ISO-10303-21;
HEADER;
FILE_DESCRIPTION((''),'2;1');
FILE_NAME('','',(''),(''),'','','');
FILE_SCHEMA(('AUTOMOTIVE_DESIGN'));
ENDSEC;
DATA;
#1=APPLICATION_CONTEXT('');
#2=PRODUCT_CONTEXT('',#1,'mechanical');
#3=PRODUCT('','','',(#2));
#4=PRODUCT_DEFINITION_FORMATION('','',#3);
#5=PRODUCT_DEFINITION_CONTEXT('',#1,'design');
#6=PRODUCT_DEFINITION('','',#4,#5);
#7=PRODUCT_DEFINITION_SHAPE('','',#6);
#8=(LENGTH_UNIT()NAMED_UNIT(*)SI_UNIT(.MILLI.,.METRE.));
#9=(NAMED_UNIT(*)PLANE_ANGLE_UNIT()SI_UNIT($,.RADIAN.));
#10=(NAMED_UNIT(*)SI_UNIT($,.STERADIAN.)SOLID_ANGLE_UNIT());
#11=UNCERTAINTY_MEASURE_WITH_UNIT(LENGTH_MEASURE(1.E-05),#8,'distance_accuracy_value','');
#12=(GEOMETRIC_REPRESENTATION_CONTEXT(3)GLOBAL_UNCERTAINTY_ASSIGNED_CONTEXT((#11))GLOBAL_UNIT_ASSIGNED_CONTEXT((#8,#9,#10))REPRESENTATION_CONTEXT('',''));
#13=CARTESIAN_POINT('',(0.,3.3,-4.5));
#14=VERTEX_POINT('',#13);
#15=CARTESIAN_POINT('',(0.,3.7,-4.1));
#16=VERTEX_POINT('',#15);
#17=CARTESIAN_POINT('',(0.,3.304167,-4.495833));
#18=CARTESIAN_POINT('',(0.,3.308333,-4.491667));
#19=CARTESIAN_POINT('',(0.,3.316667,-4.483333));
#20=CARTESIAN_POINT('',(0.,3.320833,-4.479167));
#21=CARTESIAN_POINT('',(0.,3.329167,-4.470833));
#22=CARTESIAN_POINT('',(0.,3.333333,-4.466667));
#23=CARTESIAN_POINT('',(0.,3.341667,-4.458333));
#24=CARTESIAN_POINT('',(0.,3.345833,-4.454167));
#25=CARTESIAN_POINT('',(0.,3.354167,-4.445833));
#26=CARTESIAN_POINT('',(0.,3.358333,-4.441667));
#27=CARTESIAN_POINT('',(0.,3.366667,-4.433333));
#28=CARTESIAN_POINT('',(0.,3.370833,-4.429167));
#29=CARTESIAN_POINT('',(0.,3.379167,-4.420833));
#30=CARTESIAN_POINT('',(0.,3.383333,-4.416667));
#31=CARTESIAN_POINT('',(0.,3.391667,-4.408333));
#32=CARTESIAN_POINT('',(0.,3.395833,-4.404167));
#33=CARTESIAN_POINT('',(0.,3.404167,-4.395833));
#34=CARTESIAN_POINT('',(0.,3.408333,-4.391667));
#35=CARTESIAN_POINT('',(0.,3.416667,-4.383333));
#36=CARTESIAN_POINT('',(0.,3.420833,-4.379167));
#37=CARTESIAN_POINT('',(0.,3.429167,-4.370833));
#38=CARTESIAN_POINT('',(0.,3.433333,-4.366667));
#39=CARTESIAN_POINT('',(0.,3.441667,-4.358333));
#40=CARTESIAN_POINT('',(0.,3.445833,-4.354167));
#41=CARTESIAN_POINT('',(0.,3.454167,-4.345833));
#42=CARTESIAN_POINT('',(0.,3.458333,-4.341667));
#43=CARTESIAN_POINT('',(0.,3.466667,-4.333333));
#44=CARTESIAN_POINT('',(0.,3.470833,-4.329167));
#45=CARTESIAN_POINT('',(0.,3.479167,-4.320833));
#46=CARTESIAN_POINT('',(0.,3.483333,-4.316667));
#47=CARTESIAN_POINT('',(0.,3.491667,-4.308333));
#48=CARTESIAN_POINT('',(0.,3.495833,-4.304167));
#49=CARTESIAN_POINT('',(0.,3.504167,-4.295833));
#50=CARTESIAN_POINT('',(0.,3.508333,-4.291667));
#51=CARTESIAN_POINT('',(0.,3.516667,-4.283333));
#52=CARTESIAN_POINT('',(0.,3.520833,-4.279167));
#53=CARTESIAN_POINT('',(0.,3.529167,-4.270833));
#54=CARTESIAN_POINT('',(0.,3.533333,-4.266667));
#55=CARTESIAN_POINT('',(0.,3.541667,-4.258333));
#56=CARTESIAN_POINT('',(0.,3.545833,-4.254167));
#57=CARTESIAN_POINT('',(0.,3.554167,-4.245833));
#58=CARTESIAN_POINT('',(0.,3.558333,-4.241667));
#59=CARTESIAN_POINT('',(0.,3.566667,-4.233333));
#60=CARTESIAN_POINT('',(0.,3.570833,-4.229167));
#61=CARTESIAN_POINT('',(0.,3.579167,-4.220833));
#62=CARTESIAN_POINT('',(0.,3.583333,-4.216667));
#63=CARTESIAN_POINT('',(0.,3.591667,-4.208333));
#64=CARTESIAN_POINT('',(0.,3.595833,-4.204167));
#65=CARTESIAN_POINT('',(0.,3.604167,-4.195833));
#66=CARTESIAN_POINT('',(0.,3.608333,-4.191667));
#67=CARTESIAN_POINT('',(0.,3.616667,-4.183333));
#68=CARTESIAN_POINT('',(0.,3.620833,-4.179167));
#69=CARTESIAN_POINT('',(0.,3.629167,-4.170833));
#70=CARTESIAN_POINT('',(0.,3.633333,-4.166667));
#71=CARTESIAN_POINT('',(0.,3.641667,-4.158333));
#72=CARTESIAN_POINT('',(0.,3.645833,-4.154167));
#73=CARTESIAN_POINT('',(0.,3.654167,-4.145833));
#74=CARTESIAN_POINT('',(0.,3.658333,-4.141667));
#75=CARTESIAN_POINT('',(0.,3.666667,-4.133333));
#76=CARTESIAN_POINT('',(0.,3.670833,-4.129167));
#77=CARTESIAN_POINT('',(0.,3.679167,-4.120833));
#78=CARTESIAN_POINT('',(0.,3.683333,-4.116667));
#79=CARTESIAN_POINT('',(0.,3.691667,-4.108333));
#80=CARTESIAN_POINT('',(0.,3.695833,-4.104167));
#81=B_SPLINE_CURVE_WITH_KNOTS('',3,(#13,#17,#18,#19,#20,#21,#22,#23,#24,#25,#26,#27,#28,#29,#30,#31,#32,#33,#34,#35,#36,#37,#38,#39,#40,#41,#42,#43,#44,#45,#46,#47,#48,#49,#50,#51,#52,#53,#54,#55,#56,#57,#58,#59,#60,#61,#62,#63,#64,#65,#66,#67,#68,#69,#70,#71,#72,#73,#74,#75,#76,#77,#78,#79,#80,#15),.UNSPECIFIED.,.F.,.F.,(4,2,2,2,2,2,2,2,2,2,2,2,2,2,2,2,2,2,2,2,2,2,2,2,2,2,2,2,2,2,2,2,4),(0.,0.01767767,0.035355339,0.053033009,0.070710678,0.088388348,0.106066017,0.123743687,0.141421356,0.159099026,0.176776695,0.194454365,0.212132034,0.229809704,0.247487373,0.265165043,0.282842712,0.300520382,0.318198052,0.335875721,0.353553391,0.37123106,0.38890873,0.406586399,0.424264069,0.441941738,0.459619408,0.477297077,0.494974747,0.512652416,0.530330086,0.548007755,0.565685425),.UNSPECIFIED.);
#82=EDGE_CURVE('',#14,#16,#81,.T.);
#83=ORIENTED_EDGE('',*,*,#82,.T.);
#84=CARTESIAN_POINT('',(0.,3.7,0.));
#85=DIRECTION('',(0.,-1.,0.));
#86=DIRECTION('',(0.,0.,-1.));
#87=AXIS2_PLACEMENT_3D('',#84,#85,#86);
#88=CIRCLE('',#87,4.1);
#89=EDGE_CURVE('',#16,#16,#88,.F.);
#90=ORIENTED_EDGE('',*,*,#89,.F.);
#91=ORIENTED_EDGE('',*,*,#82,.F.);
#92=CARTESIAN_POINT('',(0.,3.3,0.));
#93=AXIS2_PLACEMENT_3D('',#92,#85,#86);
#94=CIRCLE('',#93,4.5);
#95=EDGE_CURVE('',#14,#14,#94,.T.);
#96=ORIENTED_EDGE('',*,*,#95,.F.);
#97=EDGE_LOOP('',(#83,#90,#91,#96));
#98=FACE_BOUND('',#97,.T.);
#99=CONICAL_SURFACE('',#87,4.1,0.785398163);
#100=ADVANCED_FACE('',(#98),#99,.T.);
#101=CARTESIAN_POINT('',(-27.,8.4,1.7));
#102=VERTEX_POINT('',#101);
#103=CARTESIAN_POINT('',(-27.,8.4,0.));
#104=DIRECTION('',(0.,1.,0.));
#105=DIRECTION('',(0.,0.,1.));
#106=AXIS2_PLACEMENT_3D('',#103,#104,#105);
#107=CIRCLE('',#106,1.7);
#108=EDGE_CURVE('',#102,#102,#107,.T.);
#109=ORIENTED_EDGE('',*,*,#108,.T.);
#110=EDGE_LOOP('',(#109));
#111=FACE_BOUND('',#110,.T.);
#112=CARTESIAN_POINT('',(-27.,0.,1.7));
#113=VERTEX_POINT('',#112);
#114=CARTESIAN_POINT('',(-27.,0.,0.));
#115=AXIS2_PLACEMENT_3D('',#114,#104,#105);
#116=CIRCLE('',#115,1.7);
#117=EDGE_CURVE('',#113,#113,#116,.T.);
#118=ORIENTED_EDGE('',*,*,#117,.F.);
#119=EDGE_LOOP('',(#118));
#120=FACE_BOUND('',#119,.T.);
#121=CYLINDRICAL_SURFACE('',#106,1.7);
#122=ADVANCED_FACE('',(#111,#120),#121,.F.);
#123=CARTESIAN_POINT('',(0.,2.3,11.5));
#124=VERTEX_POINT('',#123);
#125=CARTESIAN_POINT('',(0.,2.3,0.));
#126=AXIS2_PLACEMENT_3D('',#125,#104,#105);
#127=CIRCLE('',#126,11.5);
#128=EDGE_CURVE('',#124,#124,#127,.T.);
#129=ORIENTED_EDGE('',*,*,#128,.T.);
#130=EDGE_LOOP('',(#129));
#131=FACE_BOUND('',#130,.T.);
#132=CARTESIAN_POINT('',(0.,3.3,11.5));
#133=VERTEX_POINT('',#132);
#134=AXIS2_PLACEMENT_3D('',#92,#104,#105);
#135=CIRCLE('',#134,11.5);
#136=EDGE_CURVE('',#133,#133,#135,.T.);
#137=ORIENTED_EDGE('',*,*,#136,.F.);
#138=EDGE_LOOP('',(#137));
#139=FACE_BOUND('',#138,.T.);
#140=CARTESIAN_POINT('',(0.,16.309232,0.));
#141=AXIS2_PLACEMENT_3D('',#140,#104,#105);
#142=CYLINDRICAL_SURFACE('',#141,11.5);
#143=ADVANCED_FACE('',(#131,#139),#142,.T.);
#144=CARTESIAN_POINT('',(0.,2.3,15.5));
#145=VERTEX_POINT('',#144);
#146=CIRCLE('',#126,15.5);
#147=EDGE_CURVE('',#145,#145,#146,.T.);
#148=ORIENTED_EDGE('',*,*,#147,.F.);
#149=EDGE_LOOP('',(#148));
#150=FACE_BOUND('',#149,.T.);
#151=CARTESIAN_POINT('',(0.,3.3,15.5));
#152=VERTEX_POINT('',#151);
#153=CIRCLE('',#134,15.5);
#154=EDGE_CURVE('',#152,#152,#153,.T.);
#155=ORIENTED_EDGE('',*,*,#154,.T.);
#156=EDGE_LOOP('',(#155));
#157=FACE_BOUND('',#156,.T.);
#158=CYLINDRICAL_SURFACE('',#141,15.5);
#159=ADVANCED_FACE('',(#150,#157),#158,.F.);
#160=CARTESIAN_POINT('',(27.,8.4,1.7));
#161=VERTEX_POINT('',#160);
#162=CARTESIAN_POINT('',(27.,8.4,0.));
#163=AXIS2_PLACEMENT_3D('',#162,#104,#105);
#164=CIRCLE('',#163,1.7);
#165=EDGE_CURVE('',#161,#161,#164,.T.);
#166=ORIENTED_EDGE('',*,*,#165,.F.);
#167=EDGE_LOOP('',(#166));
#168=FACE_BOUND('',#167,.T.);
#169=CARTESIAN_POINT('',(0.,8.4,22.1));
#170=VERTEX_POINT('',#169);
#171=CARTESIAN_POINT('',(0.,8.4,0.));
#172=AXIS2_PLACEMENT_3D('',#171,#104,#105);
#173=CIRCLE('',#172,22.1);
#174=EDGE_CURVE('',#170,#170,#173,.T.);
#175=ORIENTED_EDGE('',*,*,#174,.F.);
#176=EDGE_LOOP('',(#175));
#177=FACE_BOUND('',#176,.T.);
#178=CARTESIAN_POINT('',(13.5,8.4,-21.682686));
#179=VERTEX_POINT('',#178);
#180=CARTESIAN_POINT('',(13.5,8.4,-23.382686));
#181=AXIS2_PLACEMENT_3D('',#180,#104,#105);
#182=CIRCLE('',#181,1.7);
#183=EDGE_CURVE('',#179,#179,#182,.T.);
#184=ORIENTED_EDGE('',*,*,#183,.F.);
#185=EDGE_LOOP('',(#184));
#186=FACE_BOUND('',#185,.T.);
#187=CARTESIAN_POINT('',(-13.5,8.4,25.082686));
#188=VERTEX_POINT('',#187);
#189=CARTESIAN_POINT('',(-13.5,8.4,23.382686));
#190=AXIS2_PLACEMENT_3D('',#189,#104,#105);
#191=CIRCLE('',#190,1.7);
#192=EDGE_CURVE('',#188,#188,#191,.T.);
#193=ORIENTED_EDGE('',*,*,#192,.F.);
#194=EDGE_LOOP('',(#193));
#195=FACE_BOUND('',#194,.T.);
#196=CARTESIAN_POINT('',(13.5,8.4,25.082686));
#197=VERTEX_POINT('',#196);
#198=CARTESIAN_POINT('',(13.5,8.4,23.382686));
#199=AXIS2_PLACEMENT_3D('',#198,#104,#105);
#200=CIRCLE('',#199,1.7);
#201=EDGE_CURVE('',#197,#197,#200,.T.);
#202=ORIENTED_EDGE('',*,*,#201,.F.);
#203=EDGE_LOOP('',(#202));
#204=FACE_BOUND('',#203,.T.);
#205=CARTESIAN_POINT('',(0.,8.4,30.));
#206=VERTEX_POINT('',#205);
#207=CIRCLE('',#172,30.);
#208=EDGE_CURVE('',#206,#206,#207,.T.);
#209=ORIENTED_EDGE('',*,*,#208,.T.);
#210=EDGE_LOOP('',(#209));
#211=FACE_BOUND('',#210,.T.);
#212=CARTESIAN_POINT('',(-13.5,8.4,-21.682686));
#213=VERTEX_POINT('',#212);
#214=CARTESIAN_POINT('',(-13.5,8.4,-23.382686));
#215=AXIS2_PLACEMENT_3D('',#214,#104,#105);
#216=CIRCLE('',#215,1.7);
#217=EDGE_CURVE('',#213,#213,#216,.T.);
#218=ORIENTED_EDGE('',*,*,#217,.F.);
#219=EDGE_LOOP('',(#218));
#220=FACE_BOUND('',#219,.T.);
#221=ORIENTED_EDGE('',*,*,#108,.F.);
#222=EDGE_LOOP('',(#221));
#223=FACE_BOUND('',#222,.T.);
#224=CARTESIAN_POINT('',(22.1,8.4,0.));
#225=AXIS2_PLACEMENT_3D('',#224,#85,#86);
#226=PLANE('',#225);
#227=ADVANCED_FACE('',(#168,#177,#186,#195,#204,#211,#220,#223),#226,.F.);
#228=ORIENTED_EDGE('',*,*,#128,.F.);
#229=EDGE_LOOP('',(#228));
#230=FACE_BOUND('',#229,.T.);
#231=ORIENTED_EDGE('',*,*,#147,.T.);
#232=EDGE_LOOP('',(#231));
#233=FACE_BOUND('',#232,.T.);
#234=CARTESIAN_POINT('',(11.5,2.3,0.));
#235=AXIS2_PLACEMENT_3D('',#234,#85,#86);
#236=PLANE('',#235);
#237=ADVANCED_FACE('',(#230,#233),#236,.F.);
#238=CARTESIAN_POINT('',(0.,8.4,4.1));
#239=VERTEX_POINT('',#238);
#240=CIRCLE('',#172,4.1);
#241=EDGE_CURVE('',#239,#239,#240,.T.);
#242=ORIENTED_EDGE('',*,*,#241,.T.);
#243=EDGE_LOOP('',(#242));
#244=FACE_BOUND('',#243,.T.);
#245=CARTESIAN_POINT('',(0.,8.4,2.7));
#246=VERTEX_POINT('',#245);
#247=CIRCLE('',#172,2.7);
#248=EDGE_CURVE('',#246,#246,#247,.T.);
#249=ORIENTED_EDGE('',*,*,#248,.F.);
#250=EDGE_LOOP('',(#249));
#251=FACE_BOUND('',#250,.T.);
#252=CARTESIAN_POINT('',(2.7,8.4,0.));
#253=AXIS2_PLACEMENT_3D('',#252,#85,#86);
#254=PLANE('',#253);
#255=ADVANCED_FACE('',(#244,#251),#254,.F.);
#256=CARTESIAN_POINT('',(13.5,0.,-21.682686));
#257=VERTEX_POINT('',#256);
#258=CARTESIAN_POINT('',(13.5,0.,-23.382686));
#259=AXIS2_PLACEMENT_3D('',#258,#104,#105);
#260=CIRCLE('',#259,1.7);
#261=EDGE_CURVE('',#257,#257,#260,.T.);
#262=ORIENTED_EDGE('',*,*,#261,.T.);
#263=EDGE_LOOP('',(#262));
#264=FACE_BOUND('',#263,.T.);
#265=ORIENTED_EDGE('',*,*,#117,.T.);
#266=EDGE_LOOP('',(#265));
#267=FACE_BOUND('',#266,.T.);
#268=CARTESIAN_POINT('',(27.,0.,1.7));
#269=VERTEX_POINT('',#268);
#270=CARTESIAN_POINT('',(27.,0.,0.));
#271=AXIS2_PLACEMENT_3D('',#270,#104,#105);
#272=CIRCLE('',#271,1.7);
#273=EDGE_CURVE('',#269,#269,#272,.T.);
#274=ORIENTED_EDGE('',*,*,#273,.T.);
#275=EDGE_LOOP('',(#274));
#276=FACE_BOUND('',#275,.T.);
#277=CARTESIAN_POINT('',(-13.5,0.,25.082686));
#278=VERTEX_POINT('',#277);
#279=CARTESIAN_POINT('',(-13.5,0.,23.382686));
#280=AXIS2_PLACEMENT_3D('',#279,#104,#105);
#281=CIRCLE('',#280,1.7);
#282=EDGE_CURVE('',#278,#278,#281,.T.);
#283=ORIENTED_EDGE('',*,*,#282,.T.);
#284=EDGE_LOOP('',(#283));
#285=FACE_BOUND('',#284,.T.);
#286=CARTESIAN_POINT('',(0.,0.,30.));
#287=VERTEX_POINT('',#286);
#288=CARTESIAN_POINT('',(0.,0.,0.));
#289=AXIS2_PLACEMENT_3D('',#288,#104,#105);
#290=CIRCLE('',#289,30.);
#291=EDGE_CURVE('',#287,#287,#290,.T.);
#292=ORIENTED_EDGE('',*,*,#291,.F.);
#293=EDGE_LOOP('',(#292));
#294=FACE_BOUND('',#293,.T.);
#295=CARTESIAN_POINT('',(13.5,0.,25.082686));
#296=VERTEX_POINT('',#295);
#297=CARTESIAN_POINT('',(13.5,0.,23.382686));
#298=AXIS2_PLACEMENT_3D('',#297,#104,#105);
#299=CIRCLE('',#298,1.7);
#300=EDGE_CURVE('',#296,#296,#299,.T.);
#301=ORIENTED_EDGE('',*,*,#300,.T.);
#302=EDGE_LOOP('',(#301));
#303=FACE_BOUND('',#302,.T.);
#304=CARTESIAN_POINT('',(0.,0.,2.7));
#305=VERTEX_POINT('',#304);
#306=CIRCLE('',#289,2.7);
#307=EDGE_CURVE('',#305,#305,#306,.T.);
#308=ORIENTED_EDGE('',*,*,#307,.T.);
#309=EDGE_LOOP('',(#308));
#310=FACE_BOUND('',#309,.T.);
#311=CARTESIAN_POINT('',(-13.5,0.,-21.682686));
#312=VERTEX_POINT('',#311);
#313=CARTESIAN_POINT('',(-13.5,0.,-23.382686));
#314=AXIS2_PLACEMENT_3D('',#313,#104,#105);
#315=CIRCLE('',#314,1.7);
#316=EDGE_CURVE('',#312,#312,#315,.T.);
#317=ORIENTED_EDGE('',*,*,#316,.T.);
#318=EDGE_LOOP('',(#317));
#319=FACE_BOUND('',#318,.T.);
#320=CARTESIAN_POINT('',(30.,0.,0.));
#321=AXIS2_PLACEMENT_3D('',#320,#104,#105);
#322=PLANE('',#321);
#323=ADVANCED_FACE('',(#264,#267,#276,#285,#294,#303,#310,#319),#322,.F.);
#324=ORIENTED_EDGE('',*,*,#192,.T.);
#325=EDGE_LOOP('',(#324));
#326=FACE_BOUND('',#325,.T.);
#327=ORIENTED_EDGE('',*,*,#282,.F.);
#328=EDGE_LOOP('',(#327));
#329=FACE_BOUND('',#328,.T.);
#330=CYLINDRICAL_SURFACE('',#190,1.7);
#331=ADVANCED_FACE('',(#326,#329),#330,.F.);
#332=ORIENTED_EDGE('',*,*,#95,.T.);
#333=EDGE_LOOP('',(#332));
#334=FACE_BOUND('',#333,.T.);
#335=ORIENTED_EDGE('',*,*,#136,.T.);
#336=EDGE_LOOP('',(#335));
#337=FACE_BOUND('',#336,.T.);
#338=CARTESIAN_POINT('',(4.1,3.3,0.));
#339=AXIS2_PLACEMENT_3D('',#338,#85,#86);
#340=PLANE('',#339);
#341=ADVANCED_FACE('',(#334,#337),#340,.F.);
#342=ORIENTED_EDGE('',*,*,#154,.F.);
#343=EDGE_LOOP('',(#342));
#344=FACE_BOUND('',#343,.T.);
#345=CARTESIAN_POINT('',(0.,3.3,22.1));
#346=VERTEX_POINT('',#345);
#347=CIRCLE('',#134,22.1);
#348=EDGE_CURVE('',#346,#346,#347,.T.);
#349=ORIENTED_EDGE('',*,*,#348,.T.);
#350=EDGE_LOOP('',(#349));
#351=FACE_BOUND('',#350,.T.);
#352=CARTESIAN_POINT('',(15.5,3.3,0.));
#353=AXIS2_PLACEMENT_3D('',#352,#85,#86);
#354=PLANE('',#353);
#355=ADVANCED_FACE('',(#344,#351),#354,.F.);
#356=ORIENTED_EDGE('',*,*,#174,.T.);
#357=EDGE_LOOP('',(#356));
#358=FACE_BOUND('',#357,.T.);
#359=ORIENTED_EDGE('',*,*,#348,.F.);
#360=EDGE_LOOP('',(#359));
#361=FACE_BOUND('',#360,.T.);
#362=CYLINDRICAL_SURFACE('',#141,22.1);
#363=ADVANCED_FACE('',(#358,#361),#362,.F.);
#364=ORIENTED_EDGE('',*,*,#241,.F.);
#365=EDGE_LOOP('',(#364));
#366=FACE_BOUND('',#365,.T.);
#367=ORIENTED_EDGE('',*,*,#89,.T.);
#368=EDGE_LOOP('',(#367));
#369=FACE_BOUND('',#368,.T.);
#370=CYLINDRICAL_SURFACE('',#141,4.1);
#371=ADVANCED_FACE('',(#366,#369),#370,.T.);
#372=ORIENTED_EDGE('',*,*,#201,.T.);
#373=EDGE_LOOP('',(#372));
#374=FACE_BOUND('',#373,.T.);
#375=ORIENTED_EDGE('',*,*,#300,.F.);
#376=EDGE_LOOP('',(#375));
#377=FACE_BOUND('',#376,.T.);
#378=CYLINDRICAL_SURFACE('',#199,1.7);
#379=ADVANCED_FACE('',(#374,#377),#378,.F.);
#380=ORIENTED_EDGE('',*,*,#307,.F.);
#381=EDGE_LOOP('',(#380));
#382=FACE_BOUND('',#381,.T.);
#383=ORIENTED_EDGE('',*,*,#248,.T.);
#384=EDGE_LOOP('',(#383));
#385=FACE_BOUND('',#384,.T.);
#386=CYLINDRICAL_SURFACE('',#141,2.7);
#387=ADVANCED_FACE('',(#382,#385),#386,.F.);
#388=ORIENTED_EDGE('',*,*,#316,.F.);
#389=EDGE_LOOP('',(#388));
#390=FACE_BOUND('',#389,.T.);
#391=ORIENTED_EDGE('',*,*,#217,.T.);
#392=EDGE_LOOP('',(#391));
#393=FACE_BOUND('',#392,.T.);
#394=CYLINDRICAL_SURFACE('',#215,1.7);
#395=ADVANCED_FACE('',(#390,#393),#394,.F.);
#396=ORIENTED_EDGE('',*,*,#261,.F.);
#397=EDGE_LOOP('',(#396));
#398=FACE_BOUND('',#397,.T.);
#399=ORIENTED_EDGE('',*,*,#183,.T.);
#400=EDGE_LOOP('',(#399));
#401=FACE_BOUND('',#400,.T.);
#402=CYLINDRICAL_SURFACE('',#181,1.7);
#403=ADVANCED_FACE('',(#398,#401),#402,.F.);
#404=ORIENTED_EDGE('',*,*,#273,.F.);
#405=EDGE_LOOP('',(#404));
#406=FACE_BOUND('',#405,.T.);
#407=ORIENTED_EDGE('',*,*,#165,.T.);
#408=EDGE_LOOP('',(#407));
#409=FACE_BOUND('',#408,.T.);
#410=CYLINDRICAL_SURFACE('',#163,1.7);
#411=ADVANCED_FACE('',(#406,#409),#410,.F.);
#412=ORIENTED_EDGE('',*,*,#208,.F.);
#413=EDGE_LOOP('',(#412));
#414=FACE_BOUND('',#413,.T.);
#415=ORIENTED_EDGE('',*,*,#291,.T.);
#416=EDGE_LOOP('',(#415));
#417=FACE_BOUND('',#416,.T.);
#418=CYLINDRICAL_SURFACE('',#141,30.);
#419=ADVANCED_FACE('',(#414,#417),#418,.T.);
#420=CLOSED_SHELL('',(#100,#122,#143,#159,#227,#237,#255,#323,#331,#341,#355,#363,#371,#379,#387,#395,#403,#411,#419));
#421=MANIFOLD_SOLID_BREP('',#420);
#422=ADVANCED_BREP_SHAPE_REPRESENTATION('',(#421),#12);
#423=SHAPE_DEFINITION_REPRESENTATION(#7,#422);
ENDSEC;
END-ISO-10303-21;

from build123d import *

# Parameters (mm, degrees)
M3_CLEARANCE_HOLE1_OUTLINE_R = 1.7
M3_CLEARANCE_HOLE1_DEPTH     = 8.4
CHAMFER1_SIZE                = 0.4


# Read off the part's stored shape, not the designer's step: M3 Clearance Hole1
with BuildPart() as part:
    # Sketch1 → Revolve1 (revolve)
    with BuildSketch(Plane.XY, mode=Mode.PRIVATE) as revolve1_sk:
        Polygon((2.7, 0), (2.7, 8.4), (4.1, 8.4), (4.1, 3.3), (11.5, 3.3), (11.5, 2.3), (15.5, 2.3), (15.5, 3.3), (22.1, 3.3), (22.1, 8.4), (30, 8.4), (30, 0), align=None)
    revolve(revolve1_sk.sketch.rotate(Axis((0, 16.309231771, 0), (0, -1, 0)), 90), axis=Axis((0, 16.309231771, 0), (0, -1, 0)))

    # M3 Clearance Hole1 outline → M3 Clearance Hole1 (cut)
    with BuildSketch(Plane(origin=(0, 0, 0), x_dir=(1, 0, 0), z_dir=(0, 1, 0))):
        with Locations((13.5, -23.382685902)):
            Circle(M3_CLEARANCE_HOLE1_OUTLINE_R)
        with Locations((-13.5, -23.382685902)):
            Circle(M3_CLEARANCE_HOLE1_OUTLINE_R)
        with Locations((-27, 0)):
            Circle(M3_CLEARANCE_HOLE1_OUTLINE_R)
        with Locations((-13.5, 23.382685902)):
            Circle(M3_CLEARANCE_HOLE1_OUTLINE_R)
        with Locations((13.5, 23.382685902)):
            Circle(M3_CLEARANCE_HOLE1_OUTLINE_R)
        with Locations((27, 0)):
            Circle(M3_CLEARANCE_HOLE1_OUTLINE_R)
    extrude(amount=M3_CLEARANCE_HOLE1_DEPTH, mode=Mode.SUBTRACT)

    # Chamfer1
    chamfer1_edges = [part.edges().sort_by_distance(p)[0] for p in [
        (0, 3.3, -4.1),
    ]]
    chamfer(chamfer1_edges, length=CHAMFER1_SIZE)


solid = part.part
